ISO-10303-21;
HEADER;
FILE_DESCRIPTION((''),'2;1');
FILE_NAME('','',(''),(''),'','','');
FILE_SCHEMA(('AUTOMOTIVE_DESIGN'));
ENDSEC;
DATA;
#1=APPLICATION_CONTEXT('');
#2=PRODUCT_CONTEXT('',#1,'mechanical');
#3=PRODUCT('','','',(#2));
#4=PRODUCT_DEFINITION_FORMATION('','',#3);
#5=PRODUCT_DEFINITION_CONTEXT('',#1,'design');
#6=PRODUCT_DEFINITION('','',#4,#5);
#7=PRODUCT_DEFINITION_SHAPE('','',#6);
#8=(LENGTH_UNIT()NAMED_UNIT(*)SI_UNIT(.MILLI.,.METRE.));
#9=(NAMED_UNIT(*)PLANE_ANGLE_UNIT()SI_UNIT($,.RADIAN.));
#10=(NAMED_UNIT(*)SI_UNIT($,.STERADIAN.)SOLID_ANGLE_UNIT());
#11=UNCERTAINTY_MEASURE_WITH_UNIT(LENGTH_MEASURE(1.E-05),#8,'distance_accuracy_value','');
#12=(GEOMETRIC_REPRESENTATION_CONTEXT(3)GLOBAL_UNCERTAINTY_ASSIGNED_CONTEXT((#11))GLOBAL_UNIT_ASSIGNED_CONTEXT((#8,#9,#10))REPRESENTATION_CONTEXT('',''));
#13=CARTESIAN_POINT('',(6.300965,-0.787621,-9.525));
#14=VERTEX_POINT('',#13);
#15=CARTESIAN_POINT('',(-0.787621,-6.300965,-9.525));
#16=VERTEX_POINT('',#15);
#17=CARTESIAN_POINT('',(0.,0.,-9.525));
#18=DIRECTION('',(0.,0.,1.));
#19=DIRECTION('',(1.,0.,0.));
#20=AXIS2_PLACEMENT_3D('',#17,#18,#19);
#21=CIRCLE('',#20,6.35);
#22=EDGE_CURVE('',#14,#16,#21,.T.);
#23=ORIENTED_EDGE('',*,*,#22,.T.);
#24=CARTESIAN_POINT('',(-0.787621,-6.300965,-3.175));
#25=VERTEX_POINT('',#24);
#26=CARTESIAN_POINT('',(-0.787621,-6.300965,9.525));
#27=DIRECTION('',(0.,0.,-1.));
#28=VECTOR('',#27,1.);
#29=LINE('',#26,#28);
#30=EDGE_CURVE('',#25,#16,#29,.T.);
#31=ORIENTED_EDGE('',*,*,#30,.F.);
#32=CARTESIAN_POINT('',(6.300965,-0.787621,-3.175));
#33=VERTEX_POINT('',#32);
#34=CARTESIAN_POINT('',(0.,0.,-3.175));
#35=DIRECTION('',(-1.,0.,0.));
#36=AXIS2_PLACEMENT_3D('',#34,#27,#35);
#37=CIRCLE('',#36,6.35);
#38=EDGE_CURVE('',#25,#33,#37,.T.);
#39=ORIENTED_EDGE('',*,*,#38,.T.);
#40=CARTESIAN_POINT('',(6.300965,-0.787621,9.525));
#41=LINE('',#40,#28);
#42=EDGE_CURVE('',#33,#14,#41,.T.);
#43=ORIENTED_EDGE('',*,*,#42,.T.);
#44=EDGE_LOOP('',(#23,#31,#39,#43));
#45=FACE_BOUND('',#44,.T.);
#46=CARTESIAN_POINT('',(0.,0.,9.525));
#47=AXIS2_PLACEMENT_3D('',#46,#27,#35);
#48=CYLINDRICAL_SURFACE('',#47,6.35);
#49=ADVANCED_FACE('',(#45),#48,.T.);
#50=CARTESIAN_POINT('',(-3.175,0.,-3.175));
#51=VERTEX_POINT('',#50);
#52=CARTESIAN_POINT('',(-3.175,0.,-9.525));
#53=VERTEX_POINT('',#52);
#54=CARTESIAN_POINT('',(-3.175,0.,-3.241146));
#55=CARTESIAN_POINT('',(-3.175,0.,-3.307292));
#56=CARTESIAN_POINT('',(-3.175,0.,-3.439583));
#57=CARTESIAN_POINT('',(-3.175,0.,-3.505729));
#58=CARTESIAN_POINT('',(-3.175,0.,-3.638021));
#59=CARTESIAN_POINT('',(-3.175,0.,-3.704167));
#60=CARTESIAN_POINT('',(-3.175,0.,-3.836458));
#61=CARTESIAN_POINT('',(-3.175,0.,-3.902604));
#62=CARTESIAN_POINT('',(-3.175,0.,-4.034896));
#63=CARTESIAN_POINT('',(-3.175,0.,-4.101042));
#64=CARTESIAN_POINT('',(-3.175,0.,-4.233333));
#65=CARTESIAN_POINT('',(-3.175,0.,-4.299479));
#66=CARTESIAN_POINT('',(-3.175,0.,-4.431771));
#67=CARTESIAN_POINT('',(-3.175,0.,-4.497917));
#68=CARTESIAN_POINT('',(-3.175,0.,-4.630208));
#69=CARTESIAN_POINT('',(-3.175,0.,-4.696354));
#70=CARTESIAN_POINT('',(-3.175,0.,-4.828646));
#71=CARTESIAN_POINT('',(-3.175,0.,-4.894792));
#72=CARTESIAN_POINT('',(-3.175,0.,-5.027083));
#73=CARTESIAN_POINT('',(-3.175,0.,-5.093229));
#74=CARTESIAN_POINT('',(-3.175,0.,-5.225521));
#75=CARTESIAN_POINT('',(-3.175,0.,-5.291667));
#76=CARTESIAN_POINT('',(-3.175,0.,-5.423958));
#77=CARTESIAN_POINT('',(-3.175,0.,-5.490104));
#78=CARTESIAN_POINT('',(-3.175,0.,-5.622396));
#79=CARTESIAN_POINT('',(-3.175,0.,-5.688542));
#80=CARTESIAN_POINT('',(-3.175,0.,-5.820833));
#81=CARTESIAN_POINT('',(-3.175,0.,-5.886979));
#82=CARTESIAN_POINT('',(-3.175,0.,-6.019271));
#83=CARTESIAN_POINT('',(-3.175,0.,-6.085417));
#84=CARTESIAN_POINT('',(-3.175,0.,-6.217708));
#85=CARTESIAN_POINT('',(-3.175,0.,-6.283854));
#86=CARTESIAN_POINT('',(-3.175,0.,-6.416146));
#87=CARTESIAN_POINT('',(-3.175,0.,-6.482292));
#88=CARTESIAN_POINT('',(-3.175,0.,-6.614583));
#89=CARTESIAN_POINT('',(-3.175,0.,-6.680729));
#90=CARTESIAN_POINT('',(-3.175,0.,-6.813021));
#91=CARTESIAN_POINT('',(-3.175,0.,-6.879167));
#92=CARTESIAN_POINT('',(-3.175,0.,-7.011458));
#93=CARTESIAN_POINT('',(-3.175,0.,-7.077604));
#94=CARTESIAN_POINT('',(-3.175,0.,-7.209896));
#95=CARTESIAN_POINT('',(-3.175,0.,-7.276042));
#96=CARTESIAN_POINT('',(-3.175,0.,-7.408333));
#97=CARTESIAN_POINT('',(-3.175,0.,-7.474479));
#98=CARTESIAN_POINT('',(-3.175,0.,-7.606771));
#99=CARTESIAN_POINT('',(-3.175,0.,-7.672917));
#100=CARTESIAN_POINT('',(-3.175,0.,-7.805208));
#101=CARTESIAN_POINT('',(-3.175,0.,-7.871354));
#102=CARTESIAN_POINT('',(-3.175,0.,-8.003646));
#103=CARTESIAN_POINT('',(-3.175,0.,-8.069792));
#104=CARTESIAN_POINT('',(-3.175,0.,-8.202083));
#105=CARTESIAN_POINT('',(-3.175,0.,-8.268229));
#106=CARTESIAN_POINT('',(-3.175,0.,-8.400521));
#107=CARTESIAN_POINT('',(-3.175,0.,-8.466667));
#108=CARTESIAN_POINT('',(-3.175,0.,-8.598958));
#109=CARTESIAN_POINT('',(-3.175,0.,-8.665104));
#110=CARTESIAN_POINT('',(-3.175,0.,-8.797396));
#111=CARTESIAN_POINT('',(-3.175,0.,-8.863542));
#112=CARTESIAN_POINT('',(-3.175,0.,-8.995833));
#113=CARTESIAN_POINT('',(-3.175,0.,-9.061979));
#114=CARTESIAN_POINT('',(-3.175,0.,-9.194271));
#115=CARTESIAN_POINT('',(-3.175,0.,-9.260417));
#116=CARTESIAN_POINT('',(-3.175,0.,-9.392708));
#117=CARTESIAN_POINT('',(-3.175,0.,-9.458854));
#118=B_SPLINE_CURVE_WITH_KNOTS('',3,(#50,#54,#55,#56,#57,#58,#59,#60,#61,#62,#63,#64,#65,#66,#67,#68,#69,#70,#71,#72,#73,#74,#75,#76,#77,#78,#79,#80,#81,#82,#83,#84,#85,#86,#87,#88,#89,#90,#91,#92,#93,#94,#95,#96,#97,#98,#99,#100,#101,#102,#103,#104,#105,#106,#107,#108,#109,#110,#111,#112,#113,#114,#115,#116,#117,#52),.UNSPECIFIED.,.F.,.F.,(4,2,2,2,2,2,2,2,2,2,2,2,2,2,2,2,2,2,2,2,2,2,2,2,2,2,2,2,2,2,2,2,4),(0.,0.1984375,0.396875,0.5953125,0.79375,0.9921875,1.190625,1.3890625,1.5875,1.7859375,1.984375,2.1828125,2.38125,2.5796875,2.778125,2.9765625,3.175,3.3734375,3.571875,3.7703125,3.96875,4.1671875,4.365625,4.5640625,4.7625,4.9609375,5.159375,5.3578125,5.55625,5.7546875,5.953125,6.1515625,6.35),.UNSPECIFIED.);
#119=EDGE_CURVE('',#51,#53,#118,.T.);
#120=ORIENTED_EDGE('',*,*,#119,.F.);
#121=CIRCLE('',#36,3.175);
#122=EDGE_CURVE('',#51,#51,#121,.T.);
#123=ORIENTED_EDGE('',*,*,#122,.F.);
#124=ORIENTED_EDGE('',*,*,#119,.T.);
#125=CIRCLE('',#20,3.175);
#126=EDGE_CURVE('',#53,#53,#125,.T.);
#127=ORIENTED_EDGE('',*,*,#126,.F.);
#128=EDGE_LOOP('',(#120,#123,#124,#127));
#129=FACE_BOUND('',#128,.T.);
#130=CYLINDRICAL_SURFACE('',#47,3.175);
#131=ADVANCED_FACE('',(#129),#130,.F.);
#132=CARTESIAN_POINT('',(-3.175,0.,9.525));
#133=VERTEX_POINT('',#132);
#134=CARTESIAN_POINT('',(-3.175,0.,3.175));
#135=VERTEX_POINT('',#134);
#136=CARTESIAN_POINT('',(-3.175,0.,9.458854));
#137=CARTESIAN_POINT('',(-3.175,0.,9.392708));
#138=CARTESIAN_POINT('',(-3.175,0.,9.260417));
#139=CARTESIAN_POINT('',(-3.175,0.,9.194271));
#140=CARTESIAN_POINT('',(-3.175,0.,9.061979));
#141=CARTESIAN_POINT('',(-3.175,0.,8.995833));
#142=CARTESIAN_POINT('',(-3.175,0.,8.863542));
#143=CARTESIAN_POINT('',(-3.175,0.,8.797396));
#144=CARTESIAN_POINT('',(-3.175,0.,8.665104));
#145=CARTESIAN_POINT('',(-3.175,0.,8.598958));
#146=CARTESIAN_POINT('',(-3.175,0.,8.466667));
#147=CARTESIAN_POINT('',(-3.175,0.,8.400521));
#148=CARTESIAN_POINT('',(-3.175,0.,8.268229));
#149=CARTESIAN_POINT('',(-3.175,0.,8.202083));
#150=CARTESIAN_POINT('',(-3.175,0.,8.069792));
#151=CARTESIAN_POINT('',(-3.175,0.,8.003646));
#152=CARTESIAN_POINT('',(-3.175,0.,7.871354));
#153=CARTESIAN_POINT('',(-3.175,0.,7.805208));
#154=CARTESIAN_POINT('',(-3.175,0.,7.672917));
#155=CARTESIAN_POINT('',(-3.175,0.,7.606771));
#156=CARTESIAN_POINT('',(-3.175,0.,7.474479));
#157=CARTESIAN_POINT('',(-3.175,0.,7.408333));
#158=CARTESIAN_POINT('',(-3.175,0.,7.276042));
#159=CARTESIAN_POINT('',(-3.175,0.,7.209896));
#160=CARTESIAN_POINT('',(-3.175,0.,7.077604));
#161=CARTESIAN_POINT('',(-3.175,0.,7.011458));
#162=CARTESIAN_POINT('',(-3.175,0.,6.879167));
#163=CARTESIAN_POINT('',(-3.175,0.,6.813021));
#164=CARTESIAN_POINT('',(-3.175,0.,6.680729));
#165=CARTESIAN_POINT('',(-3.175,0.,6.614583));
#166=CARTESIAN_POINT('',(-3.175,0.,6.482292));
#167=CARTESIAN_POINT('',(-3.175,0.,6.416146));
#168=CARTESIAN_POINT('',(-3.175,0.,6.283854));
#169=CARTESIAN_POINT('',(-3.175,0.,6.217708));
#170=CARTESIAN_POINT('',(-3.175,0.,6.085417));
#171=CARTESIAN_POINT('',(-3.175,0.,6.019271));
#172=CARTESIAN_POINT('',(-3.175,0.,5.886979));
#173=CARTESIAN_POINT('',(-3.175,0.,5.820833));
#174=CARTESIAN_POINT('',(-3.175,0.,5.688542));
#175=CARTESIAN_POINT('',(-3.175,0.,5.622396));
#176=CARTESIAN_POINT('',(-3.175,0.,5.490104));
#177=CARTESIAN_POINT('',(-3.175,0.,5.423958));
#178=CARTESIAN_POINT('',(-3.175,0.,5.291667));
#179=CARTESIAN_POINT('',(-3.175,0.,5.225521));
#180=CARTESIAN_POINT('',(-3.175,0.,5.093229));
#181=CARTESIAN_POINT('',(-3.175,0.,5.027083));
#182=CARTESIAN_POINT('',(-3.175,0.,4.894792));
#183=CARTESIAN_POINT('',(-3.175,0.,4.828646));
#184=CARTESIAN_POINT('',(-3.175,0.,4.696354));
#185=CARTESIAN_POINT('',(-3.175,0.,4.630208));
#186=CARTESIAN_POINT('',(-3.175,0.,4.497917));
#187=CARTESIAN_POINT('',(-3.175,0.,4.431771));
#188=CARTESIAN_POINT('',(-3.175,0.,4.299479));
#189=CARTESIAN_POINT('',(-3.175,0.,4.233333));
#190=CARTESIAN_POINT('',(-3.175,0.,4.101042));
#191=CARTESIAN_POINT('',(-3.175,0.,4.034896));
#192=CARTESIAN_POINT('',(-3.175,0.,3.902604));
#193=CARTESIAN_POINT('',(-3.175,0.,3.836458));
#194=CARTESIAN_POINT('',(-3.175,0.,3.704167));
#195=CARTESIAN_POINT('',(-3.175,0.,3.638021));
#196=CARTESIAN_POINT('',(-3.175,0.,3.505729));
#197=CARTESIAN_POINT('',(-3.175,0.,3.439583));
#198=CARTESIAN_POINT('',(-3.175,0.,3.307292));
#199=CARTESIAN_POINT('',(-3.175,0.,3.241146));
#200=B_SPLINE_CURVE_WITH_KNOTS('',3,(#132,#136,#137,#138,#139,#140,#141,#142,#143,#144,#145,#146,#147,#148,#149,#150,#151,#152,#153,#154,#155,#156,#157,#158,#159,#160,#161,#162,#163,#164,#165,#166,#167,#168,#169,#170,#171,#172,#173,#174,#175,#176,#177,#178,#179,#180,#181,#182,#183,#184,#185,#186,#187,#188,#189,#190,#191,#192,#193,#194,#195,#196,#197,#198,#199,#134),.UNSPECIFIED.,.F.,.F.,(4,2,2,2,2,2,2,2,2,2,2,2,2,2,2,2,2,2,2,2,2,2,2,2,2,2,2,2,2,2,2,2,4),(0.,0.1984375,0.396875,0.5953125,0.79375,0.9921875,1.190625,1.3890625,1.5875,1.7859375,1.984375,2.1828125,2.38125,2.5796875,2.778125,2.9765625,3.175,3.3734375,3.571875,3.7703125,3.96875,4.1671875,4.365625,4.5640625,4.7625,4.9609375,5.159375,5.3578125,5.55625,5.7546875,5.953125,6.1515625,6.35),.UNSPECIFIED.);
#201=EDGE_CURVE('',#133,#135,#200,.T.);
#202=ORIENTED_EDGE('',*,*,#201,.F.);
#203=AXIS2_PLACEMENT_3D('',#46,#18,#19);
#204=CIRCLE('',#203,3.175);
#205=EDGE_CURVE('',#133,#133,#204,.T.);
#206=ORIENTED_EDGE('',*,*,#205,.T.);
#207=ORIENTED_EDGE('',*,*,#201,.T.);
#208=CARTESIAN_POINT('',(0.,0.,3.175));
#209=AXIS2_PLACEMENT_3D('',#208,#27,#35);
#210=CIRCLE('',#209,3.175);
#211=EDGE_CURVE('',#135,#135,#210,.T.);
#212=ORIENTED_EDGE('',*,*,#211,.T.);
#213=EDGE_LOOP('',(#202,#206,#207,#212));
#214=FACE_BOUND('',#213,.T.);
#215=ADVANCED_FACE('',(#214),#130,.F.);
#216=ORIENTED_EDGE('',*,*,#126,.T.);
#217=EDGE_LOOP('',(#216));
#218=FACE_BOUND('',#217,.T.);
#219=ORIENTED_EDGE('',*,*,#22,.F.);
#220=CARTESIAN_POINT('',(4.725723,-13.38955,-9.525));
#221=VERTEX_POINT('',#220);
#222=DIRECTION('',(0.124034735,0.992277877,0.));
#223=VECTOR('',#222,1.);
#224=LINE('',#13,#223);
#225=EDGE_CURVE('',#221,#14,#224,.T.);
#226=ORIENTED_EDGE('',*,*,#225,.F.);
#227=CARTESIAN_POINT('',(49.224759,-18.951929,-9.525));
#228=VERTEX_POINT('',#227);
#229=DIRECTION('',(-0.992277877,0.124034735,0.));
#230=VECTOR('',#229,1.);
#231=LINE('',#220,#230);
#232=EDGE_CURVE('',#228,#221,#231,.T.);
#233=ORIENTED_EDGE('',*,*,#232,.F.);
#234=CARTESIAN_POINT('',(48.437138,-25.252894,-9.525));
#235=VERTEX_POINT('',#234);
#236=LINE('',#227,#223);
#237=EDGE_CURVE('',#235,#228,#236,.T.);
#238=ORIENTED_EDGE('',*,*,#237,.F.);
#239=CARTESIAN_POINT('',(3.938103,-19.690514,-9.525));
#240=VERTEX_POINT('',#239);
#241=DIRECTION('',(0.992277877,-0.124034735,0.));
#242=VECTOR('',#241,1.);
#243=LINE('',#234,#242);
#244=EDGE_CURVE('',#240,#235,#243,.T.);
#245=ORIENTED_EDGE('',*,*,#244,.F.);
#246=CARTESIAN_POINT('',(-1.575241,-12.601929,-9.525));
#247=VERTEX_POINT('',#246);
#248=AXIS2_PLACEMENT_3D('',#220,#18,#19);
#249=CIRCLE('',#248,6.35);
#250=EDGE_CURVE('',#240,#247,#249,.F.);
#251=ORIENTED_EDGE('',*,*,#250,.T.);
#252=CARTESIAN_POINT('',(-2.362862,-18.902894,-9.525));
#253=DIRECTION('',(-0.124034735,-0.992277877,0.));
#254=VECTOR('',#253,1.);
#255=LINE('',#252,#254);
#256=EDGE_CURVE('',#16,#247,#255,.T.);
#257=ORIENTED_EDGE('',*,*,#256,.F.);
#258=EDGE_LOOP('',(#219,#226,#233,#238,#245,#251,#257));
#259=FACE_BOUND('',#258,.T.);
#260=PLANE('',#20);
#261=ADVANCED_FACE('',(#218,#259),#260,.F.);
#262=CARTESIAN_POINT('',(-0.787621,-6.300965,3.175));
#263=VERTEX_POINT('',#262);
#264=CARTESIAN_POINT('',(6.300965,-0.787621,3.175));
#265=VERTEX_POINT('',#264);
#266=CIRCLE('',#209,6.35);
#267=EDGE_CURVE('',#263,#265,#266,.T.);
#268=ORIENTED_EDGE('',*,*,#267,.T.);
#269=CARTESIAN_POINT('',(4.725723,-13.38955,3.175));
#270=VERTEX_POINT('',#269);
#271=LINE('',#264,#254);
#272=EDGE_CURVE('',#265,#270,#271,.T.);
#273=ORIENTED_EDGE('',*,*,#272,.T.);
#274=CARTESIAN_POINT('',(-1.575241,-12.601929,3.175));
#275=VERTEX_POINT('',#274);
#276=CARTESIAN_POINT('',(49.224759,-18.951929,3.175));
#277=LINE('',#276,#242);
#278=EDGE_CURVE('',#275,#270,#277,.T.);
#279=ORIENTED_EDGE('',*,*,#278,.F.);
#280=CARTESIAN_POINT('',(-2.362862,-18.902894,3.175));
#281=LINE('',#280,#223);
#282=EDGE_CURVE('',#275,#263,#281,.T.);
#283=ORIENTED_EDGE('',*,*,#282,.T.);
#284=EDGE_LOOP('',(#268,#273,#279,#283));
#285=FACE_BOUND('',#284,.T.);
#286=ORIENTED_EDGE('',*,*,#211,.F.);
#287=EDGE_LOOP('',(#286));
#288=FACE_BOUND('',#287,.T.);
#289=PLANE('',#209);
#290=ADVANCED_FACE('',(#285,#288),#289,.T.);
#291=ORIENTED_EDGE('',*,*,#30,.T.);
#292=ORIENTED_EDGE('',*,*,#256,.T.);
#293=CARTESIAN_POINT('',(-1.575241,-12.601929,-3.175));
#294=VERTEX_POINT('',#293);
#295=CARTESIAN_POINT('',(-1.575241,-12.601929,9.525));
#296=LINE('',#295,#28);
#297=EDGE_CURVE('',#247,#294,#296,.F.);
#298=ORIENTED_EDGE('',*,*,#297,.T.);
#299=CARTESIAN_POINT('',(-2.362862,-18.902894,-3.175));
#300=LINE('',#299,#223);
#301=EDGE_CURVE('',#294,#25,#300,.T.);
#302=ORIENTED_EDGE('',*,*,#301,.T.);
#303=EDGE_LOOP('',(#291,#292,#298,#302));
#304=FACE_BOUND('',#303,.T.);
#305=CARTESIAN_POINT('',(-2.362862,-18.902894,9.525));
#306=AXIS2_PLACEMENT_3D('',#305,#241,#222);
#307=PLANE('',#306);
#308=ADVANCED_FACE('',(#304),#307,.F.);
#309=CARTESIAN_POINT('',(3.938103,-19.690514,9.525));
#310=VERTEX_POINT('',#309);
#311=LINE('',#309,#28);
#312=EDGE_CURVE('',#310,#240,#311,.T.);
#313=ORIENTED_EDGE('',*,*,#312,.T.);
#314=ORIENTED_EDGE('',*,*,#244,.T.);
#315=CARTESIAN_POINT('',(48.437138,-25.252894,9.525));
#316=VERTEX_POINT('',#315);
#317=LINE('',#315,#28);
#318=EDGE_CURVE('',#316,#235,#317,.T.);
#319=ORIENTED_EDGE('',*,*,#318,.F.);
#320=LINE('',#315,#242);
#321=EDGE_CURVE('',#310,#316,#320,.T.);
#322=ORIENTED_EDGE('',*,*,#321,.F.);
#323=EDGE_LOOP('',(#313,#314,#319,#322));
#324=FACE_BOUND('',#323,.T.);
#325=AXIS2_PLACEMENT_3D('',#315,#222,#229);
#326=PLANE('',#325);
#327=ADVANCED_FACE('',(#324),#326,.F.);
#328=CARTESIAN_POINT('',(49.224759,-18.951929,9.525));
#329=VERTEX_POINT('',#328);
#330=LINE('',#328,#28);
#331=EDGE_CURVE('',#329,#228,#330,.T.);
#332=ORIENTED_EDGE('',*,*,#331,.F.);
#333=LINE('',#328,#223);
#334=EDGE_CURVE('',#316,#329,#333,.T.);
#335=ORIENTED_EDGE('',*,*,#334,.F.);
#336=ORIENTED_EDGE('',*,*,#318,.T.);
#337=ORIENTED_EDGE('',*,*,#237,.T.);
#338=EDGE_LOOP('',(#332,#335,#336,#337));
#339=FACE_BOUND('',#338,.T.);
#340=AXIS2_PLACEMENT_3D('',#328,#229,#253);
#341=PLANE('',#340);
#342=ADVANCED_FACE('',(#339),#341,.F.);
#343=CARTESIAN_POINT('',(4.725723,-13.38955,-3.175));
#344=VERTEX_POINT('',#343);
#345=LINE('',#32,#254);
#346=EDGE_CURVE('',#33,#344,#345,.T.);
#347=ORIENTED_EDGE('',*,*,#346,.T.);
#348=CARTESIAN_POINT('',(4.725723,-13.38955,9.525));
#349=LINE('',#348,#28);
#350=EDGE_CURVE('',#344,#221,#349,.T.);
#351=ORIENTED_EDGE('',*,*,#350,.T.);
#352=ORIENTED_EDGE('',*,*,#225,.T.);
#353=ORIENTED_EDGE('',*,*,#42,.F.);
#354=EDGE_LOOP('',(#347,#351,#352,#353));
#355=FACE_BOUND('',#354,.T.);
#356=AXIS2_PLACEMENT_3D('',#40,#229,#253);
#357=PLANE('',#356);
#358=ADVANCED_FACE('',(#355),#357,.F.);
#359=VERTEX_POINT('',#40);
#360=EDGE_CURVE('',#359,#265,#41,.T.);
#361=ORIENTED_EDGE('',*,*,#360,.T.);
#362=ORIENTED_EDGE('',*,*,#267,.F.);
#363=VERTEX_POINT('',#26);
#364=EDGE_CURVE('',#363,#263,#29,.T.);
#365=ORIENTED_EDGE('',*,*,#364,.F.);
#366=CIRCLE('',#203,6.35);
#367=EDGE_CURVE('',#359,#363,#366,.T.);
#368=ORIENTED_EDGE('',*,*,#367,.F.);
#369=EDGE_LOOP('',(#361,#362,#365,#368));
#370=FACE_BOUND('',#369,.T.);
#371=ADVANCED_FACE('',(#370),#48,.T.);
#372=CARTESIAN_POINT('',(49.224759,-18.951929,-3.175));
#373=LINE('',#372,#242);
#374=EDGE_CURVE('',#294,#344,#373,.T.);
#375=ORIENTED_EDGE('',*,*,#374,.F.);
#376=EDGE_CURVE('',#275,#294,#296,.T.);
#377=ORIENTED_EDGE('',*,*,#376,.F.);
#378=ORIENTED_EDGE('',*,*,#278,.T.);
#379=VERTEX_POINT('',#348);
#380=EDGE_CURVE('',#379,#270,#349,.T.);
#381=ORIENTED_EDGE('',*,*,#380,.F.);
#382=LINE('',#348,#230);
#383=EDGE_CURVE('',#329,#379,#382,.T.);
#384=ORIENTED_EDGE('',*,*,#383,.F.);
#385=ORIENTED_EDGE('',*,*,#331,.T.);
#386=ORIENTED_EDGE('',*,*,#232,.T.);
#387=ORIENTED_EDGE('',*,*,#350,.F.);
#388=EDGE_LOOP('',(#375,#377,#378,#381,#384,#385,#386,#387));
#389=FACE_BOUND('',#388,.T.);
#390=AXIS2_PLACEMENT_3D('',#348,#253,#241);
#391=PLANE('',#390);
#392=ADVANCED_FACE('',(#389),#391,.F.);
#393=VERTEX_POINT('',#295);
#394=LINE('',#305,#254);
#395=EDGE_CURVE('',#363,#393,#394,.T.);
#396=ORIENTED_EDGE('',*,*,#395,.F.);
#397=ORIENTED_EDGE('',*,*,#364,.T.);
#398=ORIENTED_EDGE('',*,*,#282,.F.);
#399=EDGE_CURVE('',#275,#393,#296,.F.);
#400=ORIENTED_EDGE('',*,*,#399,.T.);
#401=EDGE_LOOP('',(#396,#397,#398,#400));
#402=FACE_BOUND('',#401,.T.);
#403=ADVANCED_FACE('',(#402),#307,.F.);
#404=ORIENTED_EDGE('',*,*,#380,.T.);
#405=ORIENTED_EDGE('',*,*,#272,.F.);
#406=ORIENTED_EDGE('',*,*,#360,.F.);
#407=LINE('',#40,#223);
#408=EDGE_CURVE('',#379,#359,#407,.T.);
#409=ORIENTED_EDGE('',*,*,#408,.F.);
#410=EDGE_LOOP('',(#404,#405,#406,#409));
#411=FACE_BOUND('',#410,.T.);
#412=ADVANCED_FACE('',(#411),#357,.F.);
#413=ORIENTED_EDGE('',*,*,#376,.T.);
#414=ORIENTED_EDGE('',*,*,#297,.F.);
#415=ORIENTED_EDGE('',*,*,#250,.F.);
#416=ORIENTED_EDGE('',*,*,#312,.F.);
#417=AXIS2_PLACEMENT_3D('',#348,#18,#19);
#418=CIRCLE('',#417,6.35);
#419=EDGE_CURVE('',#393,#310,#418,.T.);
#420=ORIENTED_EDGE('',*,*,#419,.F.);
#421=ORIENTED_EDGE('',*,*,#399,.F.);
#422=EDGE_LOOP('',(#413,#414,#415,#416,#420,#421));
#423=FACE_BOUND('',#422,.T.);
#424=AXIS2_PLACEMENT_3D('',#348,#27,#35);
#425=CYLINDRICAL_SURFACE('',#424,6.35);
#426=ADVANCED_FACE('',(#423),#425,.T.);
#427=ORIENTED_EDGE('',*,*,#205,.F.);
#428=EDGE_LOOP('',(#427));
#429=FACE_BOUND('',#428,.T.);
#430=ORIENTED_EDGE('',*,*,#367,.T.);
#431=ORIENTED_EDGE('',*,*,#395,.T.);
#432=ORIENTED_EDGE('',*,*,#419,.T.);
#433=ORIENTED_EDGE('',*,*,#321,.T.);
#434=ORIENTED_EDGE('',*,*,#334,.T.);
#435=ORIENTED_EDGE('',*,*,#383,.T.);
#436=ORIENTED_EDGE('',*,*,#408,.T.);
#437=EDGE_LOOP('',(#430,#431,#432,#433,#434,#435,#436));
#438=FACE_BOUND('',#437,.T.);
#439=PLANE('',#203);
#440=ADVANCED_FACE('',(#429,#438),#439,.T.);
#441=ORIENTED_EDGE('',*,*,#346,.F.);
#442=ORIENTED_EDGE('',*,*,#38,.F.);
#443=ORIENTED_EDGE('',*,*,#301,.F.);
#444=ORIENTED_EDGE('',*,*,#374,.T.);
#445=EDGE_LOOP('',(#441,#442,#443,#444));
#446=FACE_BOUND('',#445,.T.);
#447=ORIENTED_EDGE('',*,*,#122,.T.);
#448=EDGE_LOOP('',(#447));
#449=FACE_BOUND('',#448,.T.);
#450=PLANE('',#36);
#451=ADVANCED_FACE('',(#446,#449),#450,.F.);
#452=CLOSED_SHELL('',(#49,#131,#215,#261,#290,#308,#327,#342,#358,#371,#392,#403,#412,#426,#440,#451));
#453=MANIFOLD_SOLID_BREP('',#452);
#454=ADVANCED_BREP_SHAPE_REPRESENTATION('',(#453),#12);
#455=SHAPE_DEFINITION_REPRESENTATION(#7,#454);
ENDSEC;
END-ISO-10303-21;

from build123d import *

# Parameters (mm, degrees)
SKETCH1_R           = 3.175
BOSS_EXTRUDE1_DEPTH = 9.525
CUT_EXTRUDE1_START  = -6.35
CUT_EXTRUDE1_DEPTH  = 6.35
FILLET1_R           = 6.35


with BuildPart() as part:
    # Sketch1 → Boss-Extrude1 (new, symmetric)
    with BuildSketch(Plane.XY):
        with BuildLine():
            Line((6.300964517, -0.787620565), (4.725723388, -13.389549599))
            Line((4.725723388, -13.389549599), (49.224758871, -18.951929034))
            Line((49.224758871, -18.951929034), (48.437138306, -25.252893551))
            Line((48.437138306, -25.252893551), (-2.362861694, -18.902893551))
            Line((-2.362861694, -18.902893551), (-0.787620565, -6.300964517))
            ThreePointArc((-0.787620565, -6.300964517), (-3.898522896, 5.01238658), (6.300964517, -0.787620565))
        make_face()
        with Locations(Location((0, 0, 0), (0, 0, 180))):
            Circle(SKETCH1_R, mode=Mode.SUBTRACT)
    extrude(amount=BOSS_EXTRUDE1_DEPTH, both=True)

    # Sketch2 → Cut-Extrude1 (cut)
    with BuildSketch(Plane.XY.offset(9.525).offset(CUT_EXTRUDE1_START)):
        Polygon((49.224758871, -18.951929034), (-15.764537124, -10.828267035), (-12.959816333, 11.60949929), (52.029479661, 3.485837291), align=None)
    extrude(amount=-CUT_EXTRUDE1_DEPTH, mode=Mode.SUBTRACT)

    # Fillet1
    fillet1_edges = [part.edges().sort_by_distance(p)[0] for p in [
        (-2.362861694, -18.902893551, 0),
    ]]
    fillet(fillet1_edges, radius=FILLET1_R - 0.0001)  # a hair under: the kernel refuses the full size


solid = part.part
